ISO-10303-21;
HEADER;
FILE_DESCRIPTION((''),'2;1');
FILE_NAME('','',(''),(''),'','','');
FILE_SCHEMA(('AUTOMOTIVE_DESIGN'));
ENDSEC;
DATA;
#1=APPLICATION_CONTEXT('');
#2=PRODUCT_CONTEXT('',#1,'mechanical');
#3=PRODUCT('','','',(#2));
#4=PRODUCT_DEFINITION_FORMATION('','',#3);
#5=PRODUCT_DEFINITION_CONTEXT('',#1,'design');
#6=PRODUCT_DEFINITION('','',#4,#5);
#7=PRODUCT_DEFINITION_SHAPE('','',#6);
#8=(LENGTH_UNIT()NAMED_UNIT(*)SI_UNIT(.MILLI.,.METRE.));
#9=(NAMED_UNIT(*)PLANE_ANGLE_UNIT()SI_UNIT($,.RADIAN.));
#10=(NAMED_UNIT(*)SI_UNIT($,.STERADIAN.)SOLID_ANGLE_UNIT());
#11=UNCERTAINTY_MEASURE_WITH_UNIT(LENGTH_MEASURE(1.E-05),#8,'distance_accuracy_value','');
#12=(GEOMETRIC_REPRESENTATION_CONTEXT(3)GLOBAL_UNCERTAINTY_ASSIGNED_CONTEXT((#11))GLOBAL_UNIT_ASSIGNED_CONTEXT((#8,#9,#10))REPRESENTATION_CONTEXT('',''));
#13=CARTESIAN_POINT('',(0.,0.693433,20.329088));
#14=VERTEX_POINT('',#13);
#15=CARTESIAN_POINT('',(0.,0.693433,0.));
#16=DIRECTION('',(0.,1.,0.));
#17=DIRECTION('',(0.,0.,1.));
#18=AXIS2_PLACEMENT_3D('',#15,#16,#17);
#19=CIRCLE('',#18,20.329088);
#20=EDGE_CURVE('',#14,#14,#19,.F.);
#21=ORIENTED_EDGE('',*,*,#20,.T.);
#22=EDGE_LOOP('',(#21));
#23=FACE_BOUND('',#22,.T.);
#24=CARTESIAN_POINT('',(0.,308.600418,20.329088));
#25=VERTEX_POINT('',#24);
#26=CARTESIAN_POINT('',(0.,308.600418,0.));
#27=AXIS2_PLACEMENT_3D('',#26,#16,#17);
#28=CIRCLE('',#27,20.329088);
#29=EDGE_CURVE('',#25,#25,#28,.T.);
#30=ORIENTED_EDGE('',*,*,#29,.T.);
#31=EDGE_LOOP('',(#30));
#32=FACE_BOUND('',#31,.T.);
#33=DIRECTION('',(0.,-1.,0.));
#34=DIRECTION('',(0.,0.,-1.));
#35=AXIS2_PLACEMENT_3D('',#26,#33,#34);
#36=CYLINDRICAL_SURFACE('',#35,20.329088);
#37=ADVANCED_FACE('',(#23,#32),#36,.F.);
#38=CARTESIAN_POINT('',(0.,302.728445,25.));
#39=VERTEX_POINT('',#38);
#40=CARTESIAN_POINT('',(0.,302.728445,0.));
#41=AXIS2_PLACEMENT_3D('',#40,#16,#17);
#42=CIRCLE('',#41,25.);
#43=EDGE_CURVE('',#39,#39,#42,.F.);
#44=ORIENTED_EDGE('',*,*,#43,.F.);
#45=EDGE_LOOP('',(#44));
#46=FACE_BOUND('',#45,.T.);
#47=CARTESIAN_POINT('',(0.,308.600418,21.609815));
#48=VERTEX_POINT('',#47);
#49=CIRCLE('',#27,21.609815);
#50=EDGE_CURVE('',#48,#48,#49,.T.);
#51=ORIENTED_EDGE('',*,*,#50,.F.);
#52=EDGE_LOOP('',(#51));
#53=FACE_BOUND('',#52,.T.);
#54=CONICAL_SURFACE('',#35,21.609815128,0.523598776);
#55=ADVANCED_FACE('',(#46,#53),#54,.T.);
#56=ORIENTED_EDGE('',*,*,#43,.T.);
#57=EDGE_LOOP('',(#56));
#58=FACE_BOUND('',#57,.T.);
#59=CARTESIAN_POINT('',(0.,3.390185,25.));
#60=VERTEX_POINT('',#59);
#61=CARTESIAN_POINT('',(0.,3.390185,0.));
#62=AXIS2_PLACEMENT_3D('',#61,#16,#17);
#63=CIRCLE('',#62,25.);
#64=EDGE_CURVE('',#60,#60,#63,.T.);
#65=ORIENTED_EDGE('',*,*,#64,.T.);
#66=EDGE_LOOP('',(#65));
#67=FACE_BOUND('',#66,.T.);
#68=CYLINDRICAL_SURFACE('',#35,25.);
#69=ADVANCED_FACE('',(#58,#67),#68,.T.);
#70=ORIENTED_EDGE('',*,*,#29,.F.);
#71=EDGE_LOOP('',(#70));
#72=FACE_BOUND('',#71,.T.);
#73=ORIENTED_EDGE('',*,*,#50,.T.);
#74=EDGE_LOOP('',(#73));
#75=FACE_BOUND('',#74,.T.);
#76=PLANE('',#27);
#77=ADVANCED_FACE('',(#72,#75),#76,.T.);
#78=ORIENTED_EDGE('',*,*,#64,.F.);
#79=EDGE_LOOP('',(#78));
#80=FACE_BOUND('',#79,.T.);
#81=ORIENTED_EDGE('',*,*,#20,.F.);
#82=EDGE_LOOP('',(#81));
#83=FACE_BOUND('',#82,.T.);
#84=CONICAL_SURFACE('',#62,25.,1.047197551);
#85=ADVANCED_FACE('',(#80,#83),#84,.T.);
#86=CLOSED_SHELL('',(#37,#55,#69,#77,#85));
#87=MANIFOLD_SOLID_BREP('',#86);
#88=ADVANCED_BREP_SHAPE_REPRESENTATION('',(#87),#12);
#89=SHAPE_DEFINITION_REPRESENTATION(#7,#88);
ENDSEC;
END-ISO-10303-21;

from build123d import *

# Parameters (mm, degrees)
SKETCH1_R           = 25
BOSS_EXTRUDE1_DEPTH = 308.600418
SKETCH2_R           = 20.329088143
CUT_EXTRUDE1_DEPTH  = 311.619088257
CHAMFER1_SIZE       = 5.871972
CHAMFER1_SIZE_2     = 3.390185


with BuildPart() as part:
    # Sketch1 → Boss-Extrude1 (new body)
    with BuildSketch(Plane(origin=(0, 0, 0), x_dir=(1, 0, 0), z_dir=(0, 1, 0))):
        with Locations(Location((0, 0, 0), (0, 0, 270))):
            Circle(SKETCH1_R)
    extrude(amount=BOSS_EXTRUDE1_DEPTH)

    # Sketch2 → Cut-Extrude1 (cut, through all)
    with BuildSketch(Plane(origin=(0, 0, 0), x_dir=(1, 0, 0), z_dir=(0, 1, 0))):
        with Locations(Location((0, 0, 0), (0, 0, 270))):
            Circle(SKETCH2_R)
    extrude(amount=CUT_EXTRUDE1_DEPTH, mode=Mode.SUBTRACT)

    # Chamfer1
    # the kernel refuses this chamfer: 5.871972, 3.390185 mm, written as the material it takes off along each edge
    with BuildSketch(Plane(origin=(0, 308.600418, 0), x_dir=(0, 0, 1), z_dir=(-1, 0, 0))) as chamfer1_piece_1:
        Polygon((25, -CHAMFER1_SIZE), (25 - CHAMFER1_SIZE_2, 0), (25, 0), align=None)
    revolve(axis=Axis((0, 308.600418, 0), (0, 1, 0)), mode=Mode.SUBTRACT)
    with BuildSketch(Plane(origin=(0, 0, 0), x_dir=(0, 0, 1), z_dir=(-1, 0, 0))) as chamfer1_piece_2:
        Polygon((25, CHAMFER1_SIZE_2), (25 - CHAMFER1_SIZE, 0), (25, 0), align=None)
    revolve(axis=Axis((0, 0, 0), (0, 1, 0)), mode=Mode.SUBTRACT)


solid = part.part
